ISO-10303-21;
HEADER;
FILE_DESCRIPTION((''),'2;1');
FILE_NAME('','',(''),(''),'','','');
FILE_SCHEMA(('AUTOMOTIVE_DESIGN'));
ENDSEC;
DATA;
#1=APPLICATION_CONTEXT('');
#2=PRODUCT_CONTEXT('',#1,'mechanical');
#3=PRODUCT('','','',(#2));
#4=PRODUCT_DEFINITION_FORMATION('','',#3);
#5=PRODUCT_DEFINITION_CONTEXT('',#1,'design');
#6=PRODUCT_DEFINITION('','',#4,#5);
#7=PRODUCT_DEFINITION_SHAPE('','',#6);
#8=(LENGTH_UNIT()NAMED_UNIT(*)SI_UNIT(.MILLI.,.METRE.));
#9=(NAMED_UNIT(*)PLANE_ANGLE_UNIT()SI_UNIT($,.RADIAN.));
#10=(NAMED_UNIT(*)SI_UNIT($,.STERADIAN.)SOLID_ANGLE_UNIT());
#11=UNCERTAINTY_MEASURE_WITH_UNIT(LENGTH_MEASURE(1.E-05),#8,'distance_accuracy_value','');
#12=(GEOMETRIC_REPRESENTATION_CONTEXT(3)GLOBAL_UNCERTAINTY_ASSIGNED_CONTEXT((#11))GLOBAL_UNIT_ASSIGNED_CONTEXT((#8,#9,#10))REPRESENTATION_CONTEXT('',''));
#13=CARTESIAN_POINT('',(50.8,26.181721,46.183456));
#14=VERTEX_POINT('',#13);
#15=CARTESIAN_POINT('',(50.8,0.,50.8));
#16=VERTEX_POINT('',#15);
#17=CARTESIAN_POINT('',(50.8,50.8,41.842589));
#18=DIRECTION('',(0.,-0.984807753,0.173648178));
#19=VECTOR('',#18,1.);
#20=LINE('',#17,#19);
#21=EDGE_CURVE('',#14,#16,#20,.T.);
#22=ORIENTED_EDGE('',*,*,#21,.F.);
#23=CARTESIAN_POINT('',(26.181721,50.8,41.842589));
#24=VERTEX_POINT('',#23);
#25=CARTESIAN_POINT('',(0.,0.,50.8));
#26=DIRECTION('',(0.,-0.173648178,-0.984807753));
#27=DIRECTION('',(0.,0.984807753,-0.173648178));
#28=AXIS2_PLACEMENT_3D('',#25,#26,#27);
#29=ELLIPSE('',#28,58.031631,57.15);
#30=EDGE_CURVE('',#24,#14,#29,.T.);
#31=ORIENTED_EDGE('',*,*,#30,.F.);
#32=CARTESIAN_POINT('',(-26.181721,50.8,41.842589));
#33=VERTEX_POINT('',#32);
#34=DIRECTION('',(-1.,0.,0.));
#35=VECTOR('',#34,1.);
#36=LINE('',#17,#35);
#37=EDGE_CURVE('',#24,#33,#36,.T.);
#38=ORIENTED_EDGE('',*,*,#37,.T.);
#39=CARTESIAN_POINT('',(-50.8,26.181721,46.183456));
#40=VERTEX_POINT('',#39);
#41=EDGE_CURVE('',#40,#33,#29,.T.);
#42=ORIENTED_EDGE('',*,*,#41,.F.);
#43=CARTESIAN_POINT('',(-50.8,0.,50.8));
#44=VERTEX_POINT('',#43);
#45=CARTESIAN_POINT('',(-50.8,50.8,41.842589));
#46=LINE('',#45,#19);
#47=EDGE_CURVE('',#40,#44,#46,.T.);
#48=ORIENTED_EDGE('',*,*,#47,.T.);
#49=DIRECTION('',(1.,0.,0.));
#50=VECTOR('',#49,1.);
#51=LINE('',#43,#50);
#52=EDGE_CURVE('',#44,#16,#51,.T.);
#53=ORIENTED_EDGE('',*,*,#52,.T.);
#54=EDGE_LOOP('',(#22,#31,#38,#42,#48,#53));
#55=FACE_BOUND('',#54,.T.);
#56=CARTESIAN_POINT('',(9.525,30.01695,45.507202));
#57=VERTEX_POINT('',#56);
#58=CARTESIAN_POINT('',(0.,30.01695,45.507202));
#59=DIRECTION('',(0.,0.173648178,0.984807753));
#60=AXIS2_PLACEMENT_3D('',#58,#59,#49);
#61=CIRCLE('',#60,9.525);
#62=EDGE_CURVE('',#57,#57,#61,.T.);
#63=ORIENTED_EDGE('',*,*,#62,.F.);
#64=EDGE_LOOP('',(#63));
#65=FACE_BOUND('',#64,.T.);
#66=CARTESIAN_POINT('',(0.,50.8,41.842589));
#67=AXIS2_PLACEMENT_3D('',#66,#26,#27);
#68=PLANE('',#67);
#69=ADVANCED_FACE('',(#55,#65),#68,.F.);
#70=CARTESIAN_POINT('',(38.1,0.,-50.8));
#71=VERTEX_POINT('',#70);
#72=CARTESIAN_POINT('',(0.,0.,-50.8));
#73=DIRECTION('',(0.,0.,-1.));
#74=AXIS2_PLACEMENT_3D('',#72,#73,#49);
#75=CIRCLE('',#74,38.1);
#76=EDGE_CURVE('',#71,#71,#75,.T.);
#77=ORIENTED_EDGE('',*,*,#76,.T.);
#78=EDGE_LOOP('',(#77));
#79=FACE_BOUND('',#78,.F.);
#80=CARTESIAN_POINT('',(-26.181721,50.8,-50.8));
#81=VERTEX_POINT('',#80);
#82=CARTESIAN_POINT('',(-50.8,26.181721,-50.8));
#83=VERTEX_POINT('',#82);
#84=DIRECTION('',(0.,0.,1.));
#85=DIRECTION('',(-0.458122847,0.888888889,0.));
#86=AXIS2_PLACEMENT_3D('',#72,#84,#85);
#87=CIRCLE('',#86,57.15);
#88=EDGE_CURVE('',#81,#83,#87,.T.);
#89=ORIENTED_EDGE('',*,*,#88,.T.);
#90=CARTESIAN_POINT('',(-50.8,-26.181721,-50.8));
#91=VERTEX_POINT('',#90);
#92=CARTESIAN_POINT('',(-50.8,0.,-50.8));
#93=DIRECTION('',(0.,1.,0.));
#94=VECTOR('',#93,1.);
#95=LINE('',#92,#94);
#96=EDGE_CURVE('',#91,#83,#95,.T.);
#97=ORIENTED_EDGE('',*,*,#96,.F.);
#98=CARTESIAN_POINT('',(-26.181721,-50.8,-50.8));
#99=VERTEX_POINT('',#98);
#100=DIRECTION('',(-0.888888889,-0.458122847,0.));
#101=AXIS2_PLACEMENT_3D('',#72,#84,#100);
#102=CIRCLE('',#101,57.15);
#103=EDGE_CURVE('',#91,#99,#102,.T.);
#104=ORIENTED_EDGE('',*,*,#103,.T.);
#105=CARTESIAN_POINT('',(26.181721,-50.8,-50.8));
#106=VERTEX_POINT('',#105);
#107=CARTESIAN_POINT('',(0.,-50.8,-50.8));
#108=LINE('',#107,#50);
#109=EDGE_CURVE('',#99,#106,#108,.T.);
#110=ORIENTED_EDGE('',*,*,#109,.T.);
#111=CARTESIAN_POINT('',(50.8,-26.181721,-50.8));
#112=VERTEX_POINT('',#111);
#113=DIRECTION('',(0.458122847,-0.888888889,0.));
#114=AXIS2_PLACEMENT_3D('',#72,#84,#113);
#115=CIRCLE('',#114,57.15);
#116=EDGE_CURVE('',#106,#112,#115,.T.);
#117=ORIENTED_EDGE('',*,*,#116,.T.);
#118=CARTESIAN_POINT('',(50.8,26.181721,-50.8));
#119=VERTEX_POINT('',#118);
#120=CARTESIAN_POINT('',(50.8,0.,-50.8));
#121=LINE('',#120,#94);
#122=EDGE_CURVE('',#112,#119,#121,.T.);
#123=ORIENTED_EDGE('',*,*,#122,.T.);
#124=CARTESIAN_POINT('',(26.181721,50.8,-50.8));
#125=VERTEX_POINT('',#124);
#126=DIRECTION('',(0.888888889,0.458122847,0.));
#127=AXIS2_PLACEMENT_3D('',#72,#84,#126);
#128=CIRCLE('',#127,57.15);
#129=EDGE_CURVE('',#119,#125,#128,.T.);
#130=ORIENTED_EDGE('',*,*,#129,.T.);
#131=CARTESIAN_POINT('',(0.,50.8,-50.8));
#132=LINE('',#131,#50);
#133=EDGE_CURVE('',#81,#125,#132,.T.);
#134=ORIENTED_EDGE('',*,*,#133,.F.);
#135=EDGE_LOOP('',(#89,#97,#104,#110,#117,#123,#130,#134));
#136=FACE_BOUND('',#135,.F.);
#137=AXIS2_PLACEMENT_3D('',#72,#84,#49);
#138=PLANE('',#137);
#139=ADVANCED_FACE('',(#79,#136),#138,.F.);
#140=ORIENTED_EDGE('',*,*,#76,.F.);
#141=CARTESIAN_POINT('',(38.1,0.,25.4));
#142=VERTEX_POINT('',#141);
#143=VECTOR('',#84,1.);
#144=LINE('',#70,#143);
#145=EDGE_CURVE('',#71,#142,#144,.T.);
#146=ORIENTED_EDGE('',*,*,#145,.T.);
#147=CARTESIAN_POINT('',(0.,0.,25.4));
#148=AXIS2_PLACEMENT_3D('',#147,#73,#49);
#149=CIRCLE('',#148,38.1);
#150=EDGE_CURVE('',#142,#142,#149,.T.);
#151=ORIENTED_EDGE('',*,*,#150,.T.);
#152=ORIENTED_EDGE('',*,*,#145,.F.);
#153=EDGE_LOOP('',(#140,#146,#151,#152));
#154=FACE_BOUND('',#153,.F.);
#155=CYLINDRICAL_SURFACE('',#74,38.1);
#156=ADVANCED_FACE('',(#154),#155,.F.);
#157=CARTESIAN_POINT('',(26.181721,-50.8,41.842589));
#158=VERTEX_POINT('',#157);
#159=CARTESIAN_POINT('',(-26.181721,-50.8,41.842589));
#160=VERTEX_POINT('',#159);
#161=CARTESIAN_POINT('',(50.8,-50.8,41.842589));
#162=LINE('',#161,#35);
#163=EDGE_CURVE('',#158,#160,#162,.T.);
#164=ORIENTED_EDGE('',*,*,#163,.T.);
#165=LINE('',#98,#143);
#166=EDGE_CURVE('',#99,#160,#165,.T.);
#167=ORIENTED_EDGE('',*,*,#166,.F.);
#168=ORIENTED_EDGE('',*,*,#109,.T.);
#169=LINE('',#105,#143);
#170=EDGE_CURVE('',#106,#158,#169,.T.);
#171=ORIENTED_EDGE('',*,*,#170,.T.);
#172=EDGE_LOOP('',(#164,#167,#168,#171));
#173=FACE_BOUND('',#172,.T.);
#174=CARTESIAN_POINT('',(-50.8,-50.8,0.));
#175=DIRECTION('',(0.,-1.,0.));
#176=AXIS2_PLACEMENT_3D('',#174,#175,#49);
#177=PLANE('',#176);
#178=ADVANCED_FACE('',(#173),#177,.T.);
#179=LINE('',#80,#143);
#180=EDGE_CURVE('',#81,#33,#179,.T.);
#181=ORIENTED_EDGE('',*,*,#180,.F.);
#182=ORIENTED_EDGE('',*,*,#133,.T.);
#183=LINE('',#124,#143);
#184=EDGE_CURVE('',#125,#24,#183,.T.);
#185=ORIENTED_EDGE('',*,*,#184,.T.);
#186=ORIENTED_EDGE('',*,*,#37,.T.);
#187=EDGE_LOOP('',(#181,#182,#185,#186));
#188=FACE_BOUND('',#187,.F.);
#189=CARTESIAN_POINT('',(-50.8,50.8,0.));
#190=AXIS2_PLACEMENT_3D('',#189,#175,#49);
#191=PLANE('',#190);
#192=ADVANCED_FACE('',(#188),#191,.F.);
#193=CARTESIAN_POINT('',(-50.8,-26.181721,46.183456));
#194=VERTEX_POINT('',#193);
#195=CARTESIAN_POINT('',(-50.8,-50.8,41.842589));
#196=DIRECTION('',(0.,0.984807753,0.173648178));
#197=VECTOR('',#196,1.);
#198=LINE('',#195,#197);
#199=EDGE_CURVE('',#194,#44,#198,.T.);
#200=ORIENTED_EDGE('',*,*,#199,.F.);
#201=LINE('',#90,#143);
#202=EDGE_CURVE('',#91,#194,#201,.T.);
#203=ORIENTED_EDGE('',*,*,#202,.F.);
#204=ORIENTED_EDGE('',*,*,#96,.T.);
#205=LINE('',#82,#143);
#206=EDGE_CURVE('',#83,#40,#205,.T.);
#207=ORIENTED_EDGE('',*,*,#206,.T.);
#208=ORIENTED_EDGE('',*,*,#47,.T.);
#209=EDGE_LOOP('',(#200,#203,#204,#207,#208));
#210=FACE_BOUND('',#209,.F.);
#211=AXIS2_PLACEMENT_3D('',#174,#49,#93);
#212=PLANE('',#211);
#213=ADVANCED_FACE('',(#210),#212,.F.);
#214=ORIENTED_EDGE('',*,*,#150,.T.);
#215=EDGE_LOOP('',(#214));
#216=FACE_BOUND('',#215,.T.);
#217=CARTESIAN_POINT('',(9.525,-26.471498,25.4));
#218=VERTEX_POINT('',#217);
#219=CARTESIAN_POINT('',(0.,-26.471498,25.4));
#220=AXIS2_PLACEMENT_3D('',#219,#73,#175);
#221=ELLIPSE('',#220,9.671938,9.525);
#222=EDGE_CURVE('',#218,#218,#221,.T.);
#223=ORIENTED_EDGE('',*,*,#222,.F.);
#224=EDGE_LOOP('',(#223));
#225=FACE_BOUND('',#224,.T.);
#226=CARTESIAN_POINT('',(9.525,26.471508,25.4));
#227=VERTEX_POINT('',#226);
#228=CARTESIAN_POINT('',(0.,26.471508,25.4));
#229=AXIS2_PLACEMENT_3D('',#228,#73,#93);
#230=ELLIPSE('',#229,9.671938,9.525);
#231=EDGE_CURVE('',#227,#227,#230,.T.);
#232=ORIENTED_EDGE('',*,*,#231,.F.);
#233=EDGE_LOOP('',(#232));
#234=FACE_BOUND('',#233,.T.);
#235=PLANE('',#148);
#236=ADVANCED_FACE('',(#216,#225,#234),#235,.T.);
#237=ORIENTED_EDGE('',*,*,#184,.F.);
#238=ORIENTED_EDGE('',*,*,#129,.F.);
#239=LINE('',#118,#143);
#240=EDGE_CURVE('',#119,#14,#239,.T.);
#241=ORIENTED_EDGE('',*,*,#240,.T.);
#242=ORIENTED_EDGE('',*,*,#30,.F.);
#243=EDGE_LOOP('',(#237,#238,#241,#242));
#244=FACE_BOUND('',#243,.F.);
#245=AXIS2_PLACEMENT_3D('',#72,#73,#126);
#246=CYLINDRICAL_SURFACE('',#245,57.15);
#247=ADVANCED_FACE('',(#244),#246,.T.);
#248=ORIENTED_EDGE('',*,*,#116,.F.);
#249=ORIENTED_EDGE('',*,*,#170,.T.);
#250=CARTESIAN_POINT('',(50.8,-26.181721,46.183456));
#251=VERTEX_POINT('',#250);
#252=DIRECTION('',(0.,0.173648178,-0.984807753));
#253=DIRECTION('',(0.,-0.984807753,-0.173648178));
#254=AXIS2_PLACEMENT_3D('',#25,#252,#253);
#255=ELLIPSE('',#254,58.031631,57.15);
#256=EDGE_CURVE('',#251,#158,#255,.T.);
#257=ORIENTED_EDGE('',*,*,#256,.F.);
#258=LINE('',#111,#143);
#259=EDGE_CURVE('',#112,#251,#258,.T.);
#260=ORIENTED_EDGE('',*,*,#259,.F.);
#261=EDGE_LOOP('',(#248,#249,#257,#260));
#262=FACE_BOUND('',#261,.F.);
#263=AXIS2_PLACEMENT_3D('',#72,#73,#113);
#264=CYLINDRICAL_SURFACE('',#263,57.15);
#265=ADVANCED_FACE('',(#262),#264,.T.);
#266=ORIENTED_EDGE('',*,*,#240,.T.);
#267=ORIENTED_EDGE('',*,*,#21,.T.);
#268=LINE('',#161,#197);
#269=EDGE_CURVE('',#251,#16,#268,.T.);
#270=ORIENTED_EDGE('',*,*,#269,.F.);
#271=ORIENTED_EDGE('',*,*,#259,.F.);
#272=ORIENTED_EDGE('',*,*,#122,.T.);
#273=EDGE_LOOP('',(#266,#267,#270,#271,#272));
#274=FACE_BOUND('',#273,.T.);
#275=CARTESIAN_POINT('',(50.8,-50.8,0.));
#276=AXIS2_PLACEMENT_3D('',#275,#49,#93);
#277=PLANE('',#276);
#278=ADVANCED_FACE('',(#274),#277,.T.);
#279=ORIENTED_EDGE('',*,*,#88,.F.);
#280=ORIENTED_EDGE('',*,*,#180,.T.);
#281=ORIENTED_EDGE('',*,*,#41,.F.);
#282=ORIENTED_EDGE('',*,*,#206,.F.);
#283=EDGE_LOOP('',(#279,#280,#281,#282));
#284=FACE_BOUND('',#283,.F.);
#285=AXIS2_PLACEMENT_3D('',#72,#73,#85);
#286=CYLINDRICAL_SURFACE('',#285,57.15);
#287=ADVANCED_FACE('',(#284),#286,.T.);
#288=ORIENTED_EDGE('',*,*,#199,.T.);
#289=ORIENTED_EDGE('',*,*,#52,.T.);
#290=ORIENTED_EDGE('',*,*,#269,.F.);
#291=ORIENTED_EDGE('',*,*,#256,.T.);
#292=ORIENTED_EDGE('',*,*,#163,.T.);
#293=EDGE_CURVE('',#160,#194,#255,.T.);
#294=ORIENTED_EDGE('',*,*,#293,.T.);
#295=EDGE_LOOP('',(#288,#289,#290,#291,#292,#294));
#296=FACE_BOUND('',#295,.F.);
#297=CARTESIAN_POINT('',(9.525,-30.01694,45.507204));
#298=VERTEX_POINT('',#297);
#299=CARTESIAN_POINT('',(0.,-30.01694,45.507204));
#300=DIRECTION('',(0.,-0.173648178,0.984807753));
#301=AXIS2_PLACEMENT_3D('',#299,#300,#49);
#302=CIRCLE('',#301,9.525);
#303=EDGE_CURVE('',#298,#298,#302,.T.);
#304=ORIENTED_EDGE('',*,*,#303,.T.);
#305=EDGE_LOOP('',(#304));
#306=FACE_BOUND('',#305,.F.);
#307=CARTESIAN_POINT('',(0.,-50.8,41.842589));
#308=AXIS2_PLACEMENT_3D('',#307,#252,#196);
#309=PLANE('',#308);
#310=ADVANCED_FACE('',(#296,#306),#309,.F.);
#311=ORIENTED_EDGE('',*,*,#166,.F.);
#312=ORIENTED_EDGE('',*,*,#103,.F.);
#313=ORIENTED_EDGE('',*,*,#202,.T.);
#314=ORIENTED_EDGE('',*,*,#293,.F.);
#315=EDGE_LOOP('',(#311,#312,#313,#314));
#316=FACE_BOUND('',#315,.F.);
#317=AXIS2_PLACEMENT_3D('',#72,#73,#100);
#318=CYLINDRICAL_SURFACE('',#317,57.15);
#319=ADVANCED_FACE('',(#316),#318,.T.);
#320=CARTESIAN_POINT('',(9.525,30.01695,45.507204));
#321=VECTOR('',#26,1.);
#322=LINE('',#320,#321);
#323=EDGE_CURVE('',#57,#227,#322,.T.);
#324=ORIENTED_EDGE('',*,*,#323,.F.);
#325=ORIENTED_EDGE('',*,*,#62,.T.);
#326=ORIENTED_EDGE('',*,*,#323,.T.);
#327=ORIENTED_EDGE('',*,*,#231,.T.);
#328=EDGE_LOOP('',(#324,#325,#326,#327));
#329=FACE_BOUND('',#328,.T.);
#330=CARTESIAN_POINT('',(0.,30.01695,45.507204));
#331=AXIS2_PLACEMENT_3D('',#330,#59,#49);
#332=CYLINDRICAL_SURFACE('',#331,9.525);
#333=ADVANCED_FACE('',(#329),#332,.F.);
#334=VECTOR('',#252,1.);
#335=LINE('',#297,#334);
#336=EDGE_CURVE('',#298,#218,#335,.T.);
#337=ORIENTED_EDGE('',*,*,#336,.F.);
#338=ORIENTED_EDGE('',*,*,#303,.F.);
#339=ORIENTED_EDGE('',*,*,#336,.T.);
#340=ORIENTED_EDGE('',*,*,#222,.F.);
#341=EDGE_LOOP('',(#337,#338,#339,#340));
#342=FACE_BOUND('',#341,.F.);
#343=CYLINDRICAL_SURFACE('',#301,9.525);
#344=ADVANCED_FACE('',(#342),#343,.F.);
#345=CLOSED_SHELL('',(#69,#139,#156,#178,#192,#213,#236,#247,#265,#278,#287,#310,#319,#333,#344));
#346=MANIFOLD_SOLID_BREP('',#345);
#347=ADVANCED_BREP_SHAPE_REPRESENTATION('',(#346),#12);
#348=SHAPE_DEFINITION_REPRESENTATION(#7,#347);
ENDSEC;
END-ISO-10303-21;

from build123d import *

# Parameters (mm, degrees)
F0_W     = 101.6
F0_H     = 101.6
F1_DEPTH = 50.8
F2_R     = 38.1
F3_DEPTH = 76.2
F5_DEPTH = 50.8
F6_R     = 9.525
F7_DEPTH = 25.4
F9_DEPTH = 127


# Not quite as in the source:
# - a pattern or mirror of a feature is missing from the dataset's text; its kind, count and spacing are read off the source's solid


with BuildPart() as f1:
    # F0 (on Top) → F1 (new body, symmetric)
    with BuildSketch(Plane.XY):
        Rectangle(F0_W, F0_H)
    extrude(amount=F1_DEPTH, both=True)

    # F2 (on face) → F3 (cut)
    with BuildSketch(Plane(origin=(0, 0, -50.8), x_dir=(1, 0, 0), z_dir=(0, 0, -1))):
        Circle(F2_R)
    extrude(amount=-F3_DEPTH, mode=Mode.SUBTRACT)

    # F4 (on Right) → F5 (cut, symmetric)
    with BuildSketch(Plane.YZ):
        Polygon((-50.8, 41.84258938), (0, 50.8), (-50.8, 50.8), align=None)
    f5 = extrude(amount=F5_DEPTH, both=True, mode=Mode.SUBTRACT)

    # F5_copies: F5 across plane
    add(f5.mirror(Plane.ZX), mode=Mode.SUBTRACT)

    # F6 (on face) → F7 (cut)
    with BuildSketch(Plane(origin=(0, -8.6873116405, 49.268192568), x_dir=(1, 0, 0), z_dir=(0, -0.1736481777, 0.984807753))):
        with Locations((0, -21.6586725745)):
            Circle(F6_R)
    f7 = extrude(amount=-F7_DEPTH, mode=Mode.SUBTRACT)

    # F7_copies: F7 across plane
    add(f7.mirror(Plane.ZX.offset(5e-06)), mode=Mode.SUBTRACT)

    # F8 (on face) → F9 (cut)
    with BuildSketch(Plane(origin=(0, 0, -50.8), x_dir=(1, 0, 0), z_dir=(0, 0, -1))):
        with BuildLine():
            ThreePointArc((26.1817207227, 50.8), (40.4111525448, 40.4111525448), (50.8, 26.1817207227))
            Line((50.8, 26.1817207227), (50.8, 50.8))
            Line((50.8, 50.8), (26.1817207227, 50.8))
        make_face()
        with BuildLine():
            Line((50.8, -50.8), (50.8, -26.1817207227))
            ThreePointArc((50.8, -26.1817207227), (40.4111525448, -40.4111525448), (26.1817207227, -50.8))
            Line((26.1817207227, -50.8), (50.8, -50.8))
        make_face()
        with BuildLine():
            Line((-26.1817207227, 50.8), (26.1817207227, 50.8))
            ThreePointArc((26.1817207227, 50.8), (0, 57.15), (-26.1817207227, 50.8))
        make_face()
        with BuildLine():
            ThreePointArc((-50.8, 26.1817207227), (-40.4111525448, 40.4111525448), (-26.1817207227, 50.8))
            Line((-26.1817207227, 50.8), (-50.8, 50.8))
            Line((-50.8, 50.8), (-50.8, 26.1817207227))
        make_face()
        with BuildLine():
            Line((-50.8, -50.8), (-26.1817207227, -50.8))
            ThreePointArc((-26.1817207227, -50.8), (-40.4111525448, -40.4111525448), (-50.8, -26.1817207227))
            Line((-50.8, -26.1817207227), (-50.8, -50.8))
        make_face()
    extrude(amount=-F9_DEPTH, mode=Mode.SUBTRACT)


solid = f1.part
